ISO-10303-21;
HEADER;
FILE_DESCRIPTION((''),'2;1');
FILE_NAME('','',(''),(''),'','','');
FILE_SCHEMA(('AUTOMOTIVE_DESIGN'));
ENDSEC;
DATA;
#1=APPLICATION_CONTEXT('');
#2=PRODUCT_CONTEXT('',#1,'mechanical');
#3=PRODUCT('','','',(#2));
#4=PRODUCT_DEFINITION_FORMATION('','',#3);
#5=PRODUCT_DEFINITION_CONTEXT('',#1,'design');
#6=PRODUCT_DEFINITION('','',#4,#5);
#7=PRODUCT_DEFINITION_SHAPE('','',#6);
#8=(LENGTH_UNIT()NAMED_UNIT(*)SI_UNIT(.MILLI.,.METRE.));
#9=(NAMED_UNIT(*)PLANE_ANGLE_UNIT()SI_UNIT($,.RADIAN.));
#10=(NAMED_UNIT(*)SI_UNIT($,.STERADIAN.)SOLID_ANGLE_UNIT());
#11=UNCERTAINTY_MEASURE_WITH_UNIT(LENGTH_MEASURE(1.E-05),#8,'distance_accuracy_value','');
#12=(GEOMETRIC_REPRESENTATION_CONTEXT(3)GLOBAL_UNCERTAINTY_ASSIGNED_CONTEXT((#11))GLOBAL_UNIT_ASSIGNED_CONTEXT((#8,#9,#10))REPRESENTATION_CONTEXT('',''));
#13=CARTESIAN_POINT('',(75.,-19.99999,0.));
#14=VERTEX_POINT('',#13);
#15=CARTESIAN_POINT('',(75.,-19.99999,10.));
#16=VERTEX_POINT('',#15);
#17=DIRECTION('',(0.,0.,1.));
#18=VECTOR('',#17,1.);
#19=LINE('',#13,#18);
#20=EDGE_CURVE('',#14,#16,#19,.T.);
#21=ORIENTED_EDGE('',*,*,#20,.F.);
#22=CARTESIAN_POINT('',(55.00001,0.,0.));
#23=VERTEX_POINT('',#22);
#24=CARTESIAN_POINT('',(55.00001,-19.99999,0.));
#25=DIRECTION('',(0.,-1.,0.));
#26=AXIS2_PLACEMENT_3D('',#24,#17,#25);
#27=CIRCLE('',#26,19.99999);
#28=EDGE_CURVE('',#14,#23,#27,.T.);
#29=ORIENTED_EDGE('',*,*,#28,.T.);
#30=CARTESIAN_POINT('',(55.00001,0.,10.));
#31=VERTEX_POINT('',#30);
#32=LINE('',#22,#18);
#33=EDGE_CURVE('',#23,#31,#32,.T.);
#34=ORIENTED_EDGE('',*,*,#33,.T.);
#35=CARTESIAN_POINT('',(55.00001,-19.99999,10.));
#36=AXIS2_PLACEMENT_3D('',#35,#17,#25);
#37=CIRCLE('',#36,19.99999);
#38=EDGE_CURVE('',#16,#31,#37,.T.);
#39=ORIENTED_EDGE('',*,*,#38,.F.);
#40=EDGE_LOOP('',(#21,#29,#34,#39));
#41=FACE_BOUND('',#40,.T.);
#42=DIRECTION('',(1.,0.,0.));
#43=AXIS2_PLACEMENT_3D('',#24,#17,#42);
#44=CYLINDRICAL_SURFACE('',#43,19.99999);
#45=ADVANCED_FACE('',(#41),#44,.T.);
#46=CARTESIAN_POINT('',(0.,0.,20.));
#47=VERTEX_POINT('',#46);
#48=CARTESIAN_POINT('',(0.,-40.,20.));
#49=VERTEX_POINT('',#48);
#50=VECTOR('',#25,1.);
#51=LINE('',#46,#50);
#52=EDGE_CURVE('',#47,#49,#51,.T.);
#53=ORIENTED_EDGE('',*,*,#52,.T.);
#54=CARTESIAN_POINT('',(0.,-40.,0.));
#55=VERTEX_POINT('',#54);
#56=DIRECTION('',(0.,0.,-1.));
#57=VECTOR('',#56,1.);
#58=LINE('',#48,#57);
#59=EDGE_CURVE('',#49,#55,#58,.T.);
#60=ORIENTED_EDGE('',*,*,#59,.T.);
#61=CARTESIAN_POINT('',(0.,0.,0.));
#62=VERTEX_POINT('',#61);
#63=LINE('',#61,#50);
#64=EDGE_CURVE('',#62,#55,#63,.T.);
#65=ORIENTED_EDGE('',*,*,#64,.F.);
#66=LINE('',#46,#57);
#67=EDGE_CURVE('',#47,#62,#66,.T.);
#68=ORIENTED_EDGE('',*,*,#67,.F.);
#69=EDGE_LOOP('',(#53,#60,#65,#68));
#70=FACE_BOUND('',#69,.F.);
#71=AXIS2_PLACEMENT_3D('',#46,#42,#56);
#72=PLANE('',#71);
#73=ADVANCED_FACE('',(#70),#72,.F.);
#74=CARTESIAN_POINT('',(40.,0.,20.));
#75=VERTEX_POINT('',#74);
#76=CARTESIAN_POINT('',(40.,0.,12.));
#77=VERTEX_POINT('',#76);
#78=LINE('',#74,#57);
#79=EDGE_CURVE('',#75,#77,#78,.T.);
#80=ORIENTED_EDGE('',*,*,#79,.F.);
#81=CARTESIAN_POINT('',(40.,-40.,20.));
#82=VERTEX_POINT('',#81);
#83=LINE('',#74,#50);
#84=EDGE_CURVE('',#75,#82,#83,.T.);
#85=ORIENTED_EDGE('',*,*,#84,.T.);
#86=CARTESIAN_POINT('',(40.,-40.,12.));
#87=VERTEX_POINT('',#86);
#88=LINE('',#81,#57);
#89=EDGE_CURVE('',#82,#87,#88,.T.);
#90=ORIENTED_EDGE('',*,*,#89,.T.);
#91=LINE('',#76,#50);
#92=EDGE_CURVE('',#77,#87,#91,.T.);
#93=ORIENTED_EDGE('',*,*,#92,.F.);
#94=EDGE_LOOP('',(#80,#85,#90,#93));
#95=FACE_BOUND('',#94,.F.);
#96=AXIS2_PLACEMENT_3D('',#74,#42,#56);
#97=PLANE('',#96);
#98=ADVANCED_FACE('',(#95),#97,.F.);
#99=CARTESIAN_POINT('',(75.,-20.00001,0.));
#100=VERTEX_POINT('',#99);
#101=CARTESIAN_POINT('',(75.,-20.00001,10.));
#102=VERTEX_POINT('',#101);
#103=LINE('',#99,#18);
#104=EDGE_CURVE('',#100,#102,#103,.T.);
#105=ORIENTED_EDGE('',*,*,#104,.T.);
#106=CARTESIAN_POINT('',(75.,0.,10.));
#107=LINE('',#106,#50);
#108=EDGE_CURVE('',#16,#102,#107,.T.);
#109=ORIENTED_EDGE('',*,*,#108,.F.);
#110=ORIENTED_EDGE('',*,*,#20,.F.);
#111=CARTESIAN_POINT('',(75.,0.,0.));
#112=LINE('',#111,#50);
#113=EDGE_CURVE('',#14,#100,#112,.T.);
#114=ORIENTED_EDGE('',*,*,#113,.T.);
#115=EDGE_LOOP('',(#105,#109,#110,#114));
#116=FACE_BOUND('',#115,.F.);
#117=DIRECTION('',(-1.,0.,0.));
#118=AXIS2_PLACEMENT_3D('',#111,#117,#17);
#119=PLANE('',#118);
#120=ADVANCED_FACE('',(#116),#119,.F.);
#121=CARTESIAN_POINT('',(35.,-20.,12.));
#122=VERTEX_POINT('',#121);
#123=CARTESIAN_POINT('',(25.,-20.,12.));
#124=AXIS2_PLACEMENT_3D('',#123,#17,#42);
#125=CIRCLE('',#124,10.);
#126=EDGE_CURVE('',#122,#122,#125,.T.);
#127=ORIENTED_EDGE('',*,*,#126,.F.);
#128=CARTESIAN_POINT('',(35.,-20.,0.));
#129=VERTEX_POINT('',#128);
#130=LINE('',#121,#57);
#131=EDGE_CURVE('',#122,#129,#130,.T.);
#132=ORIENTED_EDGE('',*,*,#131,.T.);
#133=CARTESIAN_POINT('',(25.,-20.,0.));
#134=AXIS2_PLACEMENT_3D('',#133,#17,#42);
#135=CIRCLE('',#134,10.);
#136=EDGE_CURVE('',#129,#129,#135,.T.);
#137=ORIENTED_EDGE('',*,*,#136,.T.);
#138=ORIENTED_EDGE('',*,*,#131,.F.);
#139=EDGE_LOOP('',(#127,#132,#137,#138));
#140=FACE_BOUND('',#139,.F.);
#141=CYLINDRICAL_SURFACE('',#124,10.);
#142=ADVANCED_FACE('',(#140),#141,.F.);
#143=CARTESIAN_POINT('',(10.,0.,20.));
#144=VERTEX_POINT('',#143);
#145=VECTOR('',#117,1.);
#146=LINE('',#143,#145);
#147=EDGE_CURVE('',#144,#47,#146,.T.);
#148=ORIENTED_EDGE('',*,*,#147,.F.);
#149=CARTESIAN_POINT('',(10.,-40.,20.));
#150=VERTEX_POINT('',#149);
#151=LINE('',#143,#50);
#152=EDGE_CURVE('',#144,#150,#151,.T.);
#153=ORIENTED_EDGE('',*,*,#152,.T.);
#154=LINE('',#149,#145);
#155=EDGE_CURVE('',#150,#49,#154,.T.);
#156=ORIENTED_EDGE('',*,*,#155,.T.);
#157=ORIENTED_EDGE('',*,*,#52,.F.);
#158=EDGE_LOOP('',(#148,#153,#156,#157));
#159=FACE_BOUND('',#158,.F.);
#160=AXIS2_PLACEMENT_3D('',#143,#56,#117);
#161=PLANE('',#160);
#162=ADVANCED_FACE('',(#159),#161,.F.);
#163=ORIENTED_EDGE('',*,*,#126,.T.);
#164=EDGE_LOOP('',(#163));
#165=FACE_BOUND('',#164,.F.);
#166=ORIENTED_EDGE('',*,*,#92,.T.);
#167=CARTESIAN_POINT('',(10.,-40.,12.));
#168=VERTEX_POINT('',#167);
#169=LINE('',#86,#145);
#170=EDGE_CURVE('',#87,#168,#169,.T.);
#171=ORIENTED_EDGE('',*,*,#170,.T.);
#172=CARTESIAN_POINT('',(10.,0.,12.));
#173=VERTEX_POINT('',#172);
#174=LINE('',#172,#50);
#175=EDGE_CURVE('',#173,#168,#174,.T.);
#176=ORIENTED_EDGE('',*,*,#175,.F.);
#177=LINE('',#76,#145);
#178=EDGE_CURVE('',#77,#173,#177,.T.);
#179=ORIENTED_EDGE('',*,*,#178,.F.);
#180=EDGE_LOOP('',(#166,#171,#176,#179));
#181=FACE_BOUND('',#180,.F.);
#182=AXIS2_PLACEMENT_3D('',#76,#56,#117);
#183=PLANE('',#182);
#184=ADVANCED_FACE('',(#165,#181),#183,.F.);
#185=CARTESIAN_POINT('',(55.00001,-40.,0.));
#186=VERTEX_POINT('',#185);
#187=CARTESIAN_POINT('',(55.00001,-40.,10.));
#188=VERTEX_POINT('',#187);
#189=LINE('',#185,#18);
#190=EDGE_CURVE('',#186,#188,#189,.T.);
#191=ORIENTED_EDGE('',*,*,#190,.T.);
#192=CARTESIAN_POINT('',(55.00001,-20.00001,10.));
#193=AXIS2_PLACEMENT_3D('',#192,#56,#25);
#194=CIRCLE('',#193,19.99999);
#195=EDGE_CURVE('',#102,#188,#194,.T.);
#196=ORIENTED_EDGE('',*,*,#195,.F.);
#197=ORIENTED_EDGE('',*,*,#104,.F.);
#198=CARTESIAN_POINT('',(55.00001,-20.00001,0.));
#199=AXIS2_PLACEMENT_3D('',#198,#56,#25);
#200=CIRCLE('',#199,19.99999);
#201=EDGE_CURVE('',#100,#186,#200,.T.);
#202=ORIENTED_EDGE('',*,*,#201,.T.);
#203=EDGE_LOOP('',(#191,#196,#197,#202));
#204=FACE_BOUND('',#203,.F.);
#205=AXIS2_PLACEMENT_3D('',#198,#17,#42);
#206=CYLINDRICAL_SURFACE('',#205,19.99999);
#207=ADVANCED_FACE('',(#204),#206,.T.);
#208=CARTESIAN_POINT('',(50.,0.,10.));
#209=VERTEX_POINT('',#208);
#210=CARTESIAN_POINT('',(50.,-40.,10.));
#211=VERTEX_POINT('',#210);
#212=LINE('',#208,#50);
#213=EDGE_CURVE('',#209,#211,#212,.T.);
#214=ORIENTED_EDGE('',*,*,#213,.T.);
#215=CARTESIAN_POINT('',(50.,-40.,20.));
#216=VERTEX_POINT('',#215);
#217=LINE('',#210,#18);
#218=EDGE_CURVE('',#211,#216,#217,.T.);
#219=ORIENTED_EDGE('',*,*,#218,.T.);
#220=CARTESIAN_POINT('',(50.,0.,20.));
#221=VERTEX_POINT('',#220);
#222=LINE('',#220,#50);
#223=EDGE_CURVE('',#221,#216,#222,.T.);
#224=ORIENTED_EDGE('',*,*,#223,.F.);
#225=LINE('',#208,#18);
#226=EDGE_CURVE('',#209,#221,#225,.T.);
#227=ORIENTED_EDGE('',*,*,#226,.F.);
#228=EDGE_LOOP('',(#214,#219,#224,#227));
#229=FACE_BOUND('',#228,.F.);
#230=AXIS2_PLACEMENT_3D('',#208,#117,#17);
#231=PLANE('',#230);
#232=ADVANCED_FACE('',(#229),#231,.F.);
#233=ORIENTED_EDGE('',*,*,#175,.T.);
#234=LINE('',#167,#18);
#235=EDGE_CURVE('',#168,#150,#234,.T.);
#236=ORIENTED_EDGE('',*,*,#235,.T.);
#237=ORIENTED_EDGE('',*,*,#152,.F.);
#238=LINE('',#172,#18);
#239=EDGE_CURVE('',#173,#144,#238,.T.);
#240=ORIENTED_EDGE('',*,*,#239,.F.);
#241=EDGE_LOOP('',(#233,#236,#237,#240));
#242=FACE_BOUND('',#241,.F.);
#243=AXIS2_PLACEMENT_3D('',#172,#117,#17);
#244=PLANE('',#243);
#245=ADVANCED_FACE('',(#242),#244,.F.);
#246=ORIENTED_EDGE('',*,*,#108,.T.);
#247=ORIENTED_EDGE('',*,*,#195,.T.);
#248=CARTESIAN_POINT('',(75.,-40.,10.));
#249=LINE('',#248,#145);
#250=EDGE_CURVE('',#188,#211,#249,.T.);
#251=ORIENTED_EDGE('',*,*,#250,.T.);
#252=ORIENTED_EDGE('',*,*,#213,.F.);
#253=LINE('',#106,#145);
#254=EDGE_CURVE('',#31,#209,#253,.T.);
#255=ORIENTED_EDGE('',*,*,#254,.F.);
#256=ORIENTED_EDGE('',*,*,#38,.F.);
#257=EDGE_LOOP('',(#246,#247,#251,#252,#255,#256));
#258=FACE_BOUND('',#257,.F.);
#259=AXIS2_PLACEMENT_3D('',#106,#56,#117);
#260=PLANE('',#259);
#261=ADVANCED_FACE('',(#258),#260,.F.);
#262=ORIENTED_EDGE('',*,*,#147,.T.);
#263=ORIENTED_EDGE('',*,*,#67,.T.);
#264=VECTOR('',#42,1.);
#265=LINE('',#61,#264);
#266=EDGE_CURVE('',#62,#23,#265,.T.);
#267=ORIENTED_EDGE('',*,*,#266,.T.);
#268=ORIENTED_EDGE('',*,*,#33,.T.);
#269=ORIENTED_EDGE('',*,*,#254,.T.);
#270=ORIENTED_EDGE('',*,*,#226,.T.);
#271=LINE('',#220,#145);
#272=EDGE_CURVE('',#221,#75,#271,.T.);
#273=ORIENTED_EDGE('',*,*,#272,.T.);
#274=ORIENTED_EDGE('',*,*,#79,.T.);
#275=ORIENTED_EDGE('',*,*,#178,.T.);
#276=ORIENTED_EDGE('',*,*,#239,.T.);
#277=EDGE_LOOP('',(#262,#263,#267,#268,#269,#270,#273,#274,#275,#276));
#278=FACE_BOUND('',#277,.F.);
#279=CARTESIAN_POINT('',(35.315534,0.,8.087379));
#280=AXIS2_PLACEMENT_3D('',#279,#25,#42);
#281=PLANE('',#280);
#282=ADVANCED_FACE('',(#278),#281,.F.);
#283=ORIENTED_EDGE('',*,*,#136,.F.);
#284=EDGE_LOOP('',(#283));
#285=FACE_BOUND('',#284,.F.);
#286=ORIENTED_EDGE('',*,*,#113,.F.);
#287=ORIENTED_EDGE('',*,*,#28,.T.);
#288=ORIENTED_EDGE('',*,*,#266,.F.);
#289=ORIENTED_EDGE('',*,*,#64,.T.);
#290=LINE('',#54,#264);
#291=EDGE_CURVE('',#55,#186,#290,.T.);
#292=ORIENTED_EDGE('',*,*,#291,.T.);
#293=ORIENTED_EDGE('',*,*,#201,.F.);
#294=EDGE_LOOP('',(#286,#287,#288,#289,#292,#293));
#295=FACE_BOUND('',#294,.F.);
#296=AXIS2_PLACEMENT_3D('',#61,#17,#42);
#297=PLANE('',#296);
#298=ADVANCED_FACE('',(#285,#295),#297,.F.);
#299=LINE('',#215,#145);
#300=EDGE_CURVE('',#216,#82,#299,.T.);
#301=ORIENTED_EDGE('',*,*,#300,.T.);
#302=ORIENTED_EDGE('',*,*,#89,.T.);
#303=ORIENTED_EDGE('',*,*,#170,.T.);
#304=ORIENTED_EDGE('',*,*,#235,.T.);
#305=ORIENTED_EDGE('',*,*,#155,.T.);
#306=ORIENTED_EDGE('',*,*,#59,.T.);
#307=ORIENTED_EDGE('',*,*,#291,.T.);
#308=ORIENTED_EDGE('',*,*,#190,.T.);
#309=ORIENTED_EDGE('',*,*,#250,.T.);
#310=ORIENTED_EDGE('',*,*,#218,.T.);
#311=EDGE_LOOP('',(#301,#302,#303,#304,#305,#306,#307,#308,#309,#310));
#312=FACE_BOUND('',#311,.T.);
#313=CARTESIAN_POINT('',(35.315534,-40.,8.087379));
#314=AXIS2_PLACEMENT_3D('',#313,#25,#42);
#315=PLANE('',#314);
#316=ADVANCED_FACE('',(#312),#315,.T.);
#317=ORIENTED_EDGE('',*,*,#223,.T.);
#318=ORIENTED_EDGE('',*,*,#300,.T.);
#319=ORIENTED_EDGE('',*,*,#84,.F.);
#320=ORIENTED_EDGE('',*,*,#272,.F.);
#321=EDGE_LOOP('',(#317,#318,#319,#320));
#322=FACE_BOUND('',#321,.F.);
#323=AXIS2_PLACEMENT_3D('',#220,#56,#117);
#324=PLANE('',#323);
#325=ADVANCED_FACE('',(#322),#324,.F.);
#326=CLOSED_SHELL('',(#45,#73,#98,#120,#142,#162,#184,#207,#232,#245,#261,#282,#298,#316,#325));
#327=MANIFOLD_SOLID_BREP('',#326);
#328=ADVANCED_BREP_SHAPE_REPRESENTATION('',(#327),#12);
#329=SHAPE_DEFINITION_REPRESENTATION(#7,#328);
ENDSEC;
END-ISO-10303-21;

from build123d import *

# Parameters (mm, degrees)
F1_DEPTH = 40
F2_R     = 19.99999
F3_R     = 10
F4_DEPTH = 12.001


# Not quite as in the source:
# - a fillet or chamfer is up to 0.001 mm smaller than in the source, because OpenCascade refuses the exact size


with BuildPart() as f1:
    # F0 (on Front) → F1 (new body)
    with BuildSketch(Plane.XZ):
        Polygon((0, 20), (0, 0), (75, 0), (75, 10), (50, 10), (50, 20), (40, 20), (40, 12), (10, 12), (10, 20), align=None)
    extrude(amount=F1_DEPTH)

    # F2 (radius 20 in the source; OpenCascade refuses exactly that, so slightly less here)
    f2_edges = [f1.edges().sort_by_distance(p)[0] for p in [
        (75, -40, 5),
        (75, 0, 5),
    ]]
    fillet(f2_edges, radius=F2_R)

    # F3 (on face) → F4 (cut, through all)
    with BuildSketch(Plane.XY.offset(12)):
        with Locations((25, -20)):
            Circle(F3_R)
    extrude(amount=-F4_DEPTH, mode=Mode.SUBTRACT)


solid = f1.part
